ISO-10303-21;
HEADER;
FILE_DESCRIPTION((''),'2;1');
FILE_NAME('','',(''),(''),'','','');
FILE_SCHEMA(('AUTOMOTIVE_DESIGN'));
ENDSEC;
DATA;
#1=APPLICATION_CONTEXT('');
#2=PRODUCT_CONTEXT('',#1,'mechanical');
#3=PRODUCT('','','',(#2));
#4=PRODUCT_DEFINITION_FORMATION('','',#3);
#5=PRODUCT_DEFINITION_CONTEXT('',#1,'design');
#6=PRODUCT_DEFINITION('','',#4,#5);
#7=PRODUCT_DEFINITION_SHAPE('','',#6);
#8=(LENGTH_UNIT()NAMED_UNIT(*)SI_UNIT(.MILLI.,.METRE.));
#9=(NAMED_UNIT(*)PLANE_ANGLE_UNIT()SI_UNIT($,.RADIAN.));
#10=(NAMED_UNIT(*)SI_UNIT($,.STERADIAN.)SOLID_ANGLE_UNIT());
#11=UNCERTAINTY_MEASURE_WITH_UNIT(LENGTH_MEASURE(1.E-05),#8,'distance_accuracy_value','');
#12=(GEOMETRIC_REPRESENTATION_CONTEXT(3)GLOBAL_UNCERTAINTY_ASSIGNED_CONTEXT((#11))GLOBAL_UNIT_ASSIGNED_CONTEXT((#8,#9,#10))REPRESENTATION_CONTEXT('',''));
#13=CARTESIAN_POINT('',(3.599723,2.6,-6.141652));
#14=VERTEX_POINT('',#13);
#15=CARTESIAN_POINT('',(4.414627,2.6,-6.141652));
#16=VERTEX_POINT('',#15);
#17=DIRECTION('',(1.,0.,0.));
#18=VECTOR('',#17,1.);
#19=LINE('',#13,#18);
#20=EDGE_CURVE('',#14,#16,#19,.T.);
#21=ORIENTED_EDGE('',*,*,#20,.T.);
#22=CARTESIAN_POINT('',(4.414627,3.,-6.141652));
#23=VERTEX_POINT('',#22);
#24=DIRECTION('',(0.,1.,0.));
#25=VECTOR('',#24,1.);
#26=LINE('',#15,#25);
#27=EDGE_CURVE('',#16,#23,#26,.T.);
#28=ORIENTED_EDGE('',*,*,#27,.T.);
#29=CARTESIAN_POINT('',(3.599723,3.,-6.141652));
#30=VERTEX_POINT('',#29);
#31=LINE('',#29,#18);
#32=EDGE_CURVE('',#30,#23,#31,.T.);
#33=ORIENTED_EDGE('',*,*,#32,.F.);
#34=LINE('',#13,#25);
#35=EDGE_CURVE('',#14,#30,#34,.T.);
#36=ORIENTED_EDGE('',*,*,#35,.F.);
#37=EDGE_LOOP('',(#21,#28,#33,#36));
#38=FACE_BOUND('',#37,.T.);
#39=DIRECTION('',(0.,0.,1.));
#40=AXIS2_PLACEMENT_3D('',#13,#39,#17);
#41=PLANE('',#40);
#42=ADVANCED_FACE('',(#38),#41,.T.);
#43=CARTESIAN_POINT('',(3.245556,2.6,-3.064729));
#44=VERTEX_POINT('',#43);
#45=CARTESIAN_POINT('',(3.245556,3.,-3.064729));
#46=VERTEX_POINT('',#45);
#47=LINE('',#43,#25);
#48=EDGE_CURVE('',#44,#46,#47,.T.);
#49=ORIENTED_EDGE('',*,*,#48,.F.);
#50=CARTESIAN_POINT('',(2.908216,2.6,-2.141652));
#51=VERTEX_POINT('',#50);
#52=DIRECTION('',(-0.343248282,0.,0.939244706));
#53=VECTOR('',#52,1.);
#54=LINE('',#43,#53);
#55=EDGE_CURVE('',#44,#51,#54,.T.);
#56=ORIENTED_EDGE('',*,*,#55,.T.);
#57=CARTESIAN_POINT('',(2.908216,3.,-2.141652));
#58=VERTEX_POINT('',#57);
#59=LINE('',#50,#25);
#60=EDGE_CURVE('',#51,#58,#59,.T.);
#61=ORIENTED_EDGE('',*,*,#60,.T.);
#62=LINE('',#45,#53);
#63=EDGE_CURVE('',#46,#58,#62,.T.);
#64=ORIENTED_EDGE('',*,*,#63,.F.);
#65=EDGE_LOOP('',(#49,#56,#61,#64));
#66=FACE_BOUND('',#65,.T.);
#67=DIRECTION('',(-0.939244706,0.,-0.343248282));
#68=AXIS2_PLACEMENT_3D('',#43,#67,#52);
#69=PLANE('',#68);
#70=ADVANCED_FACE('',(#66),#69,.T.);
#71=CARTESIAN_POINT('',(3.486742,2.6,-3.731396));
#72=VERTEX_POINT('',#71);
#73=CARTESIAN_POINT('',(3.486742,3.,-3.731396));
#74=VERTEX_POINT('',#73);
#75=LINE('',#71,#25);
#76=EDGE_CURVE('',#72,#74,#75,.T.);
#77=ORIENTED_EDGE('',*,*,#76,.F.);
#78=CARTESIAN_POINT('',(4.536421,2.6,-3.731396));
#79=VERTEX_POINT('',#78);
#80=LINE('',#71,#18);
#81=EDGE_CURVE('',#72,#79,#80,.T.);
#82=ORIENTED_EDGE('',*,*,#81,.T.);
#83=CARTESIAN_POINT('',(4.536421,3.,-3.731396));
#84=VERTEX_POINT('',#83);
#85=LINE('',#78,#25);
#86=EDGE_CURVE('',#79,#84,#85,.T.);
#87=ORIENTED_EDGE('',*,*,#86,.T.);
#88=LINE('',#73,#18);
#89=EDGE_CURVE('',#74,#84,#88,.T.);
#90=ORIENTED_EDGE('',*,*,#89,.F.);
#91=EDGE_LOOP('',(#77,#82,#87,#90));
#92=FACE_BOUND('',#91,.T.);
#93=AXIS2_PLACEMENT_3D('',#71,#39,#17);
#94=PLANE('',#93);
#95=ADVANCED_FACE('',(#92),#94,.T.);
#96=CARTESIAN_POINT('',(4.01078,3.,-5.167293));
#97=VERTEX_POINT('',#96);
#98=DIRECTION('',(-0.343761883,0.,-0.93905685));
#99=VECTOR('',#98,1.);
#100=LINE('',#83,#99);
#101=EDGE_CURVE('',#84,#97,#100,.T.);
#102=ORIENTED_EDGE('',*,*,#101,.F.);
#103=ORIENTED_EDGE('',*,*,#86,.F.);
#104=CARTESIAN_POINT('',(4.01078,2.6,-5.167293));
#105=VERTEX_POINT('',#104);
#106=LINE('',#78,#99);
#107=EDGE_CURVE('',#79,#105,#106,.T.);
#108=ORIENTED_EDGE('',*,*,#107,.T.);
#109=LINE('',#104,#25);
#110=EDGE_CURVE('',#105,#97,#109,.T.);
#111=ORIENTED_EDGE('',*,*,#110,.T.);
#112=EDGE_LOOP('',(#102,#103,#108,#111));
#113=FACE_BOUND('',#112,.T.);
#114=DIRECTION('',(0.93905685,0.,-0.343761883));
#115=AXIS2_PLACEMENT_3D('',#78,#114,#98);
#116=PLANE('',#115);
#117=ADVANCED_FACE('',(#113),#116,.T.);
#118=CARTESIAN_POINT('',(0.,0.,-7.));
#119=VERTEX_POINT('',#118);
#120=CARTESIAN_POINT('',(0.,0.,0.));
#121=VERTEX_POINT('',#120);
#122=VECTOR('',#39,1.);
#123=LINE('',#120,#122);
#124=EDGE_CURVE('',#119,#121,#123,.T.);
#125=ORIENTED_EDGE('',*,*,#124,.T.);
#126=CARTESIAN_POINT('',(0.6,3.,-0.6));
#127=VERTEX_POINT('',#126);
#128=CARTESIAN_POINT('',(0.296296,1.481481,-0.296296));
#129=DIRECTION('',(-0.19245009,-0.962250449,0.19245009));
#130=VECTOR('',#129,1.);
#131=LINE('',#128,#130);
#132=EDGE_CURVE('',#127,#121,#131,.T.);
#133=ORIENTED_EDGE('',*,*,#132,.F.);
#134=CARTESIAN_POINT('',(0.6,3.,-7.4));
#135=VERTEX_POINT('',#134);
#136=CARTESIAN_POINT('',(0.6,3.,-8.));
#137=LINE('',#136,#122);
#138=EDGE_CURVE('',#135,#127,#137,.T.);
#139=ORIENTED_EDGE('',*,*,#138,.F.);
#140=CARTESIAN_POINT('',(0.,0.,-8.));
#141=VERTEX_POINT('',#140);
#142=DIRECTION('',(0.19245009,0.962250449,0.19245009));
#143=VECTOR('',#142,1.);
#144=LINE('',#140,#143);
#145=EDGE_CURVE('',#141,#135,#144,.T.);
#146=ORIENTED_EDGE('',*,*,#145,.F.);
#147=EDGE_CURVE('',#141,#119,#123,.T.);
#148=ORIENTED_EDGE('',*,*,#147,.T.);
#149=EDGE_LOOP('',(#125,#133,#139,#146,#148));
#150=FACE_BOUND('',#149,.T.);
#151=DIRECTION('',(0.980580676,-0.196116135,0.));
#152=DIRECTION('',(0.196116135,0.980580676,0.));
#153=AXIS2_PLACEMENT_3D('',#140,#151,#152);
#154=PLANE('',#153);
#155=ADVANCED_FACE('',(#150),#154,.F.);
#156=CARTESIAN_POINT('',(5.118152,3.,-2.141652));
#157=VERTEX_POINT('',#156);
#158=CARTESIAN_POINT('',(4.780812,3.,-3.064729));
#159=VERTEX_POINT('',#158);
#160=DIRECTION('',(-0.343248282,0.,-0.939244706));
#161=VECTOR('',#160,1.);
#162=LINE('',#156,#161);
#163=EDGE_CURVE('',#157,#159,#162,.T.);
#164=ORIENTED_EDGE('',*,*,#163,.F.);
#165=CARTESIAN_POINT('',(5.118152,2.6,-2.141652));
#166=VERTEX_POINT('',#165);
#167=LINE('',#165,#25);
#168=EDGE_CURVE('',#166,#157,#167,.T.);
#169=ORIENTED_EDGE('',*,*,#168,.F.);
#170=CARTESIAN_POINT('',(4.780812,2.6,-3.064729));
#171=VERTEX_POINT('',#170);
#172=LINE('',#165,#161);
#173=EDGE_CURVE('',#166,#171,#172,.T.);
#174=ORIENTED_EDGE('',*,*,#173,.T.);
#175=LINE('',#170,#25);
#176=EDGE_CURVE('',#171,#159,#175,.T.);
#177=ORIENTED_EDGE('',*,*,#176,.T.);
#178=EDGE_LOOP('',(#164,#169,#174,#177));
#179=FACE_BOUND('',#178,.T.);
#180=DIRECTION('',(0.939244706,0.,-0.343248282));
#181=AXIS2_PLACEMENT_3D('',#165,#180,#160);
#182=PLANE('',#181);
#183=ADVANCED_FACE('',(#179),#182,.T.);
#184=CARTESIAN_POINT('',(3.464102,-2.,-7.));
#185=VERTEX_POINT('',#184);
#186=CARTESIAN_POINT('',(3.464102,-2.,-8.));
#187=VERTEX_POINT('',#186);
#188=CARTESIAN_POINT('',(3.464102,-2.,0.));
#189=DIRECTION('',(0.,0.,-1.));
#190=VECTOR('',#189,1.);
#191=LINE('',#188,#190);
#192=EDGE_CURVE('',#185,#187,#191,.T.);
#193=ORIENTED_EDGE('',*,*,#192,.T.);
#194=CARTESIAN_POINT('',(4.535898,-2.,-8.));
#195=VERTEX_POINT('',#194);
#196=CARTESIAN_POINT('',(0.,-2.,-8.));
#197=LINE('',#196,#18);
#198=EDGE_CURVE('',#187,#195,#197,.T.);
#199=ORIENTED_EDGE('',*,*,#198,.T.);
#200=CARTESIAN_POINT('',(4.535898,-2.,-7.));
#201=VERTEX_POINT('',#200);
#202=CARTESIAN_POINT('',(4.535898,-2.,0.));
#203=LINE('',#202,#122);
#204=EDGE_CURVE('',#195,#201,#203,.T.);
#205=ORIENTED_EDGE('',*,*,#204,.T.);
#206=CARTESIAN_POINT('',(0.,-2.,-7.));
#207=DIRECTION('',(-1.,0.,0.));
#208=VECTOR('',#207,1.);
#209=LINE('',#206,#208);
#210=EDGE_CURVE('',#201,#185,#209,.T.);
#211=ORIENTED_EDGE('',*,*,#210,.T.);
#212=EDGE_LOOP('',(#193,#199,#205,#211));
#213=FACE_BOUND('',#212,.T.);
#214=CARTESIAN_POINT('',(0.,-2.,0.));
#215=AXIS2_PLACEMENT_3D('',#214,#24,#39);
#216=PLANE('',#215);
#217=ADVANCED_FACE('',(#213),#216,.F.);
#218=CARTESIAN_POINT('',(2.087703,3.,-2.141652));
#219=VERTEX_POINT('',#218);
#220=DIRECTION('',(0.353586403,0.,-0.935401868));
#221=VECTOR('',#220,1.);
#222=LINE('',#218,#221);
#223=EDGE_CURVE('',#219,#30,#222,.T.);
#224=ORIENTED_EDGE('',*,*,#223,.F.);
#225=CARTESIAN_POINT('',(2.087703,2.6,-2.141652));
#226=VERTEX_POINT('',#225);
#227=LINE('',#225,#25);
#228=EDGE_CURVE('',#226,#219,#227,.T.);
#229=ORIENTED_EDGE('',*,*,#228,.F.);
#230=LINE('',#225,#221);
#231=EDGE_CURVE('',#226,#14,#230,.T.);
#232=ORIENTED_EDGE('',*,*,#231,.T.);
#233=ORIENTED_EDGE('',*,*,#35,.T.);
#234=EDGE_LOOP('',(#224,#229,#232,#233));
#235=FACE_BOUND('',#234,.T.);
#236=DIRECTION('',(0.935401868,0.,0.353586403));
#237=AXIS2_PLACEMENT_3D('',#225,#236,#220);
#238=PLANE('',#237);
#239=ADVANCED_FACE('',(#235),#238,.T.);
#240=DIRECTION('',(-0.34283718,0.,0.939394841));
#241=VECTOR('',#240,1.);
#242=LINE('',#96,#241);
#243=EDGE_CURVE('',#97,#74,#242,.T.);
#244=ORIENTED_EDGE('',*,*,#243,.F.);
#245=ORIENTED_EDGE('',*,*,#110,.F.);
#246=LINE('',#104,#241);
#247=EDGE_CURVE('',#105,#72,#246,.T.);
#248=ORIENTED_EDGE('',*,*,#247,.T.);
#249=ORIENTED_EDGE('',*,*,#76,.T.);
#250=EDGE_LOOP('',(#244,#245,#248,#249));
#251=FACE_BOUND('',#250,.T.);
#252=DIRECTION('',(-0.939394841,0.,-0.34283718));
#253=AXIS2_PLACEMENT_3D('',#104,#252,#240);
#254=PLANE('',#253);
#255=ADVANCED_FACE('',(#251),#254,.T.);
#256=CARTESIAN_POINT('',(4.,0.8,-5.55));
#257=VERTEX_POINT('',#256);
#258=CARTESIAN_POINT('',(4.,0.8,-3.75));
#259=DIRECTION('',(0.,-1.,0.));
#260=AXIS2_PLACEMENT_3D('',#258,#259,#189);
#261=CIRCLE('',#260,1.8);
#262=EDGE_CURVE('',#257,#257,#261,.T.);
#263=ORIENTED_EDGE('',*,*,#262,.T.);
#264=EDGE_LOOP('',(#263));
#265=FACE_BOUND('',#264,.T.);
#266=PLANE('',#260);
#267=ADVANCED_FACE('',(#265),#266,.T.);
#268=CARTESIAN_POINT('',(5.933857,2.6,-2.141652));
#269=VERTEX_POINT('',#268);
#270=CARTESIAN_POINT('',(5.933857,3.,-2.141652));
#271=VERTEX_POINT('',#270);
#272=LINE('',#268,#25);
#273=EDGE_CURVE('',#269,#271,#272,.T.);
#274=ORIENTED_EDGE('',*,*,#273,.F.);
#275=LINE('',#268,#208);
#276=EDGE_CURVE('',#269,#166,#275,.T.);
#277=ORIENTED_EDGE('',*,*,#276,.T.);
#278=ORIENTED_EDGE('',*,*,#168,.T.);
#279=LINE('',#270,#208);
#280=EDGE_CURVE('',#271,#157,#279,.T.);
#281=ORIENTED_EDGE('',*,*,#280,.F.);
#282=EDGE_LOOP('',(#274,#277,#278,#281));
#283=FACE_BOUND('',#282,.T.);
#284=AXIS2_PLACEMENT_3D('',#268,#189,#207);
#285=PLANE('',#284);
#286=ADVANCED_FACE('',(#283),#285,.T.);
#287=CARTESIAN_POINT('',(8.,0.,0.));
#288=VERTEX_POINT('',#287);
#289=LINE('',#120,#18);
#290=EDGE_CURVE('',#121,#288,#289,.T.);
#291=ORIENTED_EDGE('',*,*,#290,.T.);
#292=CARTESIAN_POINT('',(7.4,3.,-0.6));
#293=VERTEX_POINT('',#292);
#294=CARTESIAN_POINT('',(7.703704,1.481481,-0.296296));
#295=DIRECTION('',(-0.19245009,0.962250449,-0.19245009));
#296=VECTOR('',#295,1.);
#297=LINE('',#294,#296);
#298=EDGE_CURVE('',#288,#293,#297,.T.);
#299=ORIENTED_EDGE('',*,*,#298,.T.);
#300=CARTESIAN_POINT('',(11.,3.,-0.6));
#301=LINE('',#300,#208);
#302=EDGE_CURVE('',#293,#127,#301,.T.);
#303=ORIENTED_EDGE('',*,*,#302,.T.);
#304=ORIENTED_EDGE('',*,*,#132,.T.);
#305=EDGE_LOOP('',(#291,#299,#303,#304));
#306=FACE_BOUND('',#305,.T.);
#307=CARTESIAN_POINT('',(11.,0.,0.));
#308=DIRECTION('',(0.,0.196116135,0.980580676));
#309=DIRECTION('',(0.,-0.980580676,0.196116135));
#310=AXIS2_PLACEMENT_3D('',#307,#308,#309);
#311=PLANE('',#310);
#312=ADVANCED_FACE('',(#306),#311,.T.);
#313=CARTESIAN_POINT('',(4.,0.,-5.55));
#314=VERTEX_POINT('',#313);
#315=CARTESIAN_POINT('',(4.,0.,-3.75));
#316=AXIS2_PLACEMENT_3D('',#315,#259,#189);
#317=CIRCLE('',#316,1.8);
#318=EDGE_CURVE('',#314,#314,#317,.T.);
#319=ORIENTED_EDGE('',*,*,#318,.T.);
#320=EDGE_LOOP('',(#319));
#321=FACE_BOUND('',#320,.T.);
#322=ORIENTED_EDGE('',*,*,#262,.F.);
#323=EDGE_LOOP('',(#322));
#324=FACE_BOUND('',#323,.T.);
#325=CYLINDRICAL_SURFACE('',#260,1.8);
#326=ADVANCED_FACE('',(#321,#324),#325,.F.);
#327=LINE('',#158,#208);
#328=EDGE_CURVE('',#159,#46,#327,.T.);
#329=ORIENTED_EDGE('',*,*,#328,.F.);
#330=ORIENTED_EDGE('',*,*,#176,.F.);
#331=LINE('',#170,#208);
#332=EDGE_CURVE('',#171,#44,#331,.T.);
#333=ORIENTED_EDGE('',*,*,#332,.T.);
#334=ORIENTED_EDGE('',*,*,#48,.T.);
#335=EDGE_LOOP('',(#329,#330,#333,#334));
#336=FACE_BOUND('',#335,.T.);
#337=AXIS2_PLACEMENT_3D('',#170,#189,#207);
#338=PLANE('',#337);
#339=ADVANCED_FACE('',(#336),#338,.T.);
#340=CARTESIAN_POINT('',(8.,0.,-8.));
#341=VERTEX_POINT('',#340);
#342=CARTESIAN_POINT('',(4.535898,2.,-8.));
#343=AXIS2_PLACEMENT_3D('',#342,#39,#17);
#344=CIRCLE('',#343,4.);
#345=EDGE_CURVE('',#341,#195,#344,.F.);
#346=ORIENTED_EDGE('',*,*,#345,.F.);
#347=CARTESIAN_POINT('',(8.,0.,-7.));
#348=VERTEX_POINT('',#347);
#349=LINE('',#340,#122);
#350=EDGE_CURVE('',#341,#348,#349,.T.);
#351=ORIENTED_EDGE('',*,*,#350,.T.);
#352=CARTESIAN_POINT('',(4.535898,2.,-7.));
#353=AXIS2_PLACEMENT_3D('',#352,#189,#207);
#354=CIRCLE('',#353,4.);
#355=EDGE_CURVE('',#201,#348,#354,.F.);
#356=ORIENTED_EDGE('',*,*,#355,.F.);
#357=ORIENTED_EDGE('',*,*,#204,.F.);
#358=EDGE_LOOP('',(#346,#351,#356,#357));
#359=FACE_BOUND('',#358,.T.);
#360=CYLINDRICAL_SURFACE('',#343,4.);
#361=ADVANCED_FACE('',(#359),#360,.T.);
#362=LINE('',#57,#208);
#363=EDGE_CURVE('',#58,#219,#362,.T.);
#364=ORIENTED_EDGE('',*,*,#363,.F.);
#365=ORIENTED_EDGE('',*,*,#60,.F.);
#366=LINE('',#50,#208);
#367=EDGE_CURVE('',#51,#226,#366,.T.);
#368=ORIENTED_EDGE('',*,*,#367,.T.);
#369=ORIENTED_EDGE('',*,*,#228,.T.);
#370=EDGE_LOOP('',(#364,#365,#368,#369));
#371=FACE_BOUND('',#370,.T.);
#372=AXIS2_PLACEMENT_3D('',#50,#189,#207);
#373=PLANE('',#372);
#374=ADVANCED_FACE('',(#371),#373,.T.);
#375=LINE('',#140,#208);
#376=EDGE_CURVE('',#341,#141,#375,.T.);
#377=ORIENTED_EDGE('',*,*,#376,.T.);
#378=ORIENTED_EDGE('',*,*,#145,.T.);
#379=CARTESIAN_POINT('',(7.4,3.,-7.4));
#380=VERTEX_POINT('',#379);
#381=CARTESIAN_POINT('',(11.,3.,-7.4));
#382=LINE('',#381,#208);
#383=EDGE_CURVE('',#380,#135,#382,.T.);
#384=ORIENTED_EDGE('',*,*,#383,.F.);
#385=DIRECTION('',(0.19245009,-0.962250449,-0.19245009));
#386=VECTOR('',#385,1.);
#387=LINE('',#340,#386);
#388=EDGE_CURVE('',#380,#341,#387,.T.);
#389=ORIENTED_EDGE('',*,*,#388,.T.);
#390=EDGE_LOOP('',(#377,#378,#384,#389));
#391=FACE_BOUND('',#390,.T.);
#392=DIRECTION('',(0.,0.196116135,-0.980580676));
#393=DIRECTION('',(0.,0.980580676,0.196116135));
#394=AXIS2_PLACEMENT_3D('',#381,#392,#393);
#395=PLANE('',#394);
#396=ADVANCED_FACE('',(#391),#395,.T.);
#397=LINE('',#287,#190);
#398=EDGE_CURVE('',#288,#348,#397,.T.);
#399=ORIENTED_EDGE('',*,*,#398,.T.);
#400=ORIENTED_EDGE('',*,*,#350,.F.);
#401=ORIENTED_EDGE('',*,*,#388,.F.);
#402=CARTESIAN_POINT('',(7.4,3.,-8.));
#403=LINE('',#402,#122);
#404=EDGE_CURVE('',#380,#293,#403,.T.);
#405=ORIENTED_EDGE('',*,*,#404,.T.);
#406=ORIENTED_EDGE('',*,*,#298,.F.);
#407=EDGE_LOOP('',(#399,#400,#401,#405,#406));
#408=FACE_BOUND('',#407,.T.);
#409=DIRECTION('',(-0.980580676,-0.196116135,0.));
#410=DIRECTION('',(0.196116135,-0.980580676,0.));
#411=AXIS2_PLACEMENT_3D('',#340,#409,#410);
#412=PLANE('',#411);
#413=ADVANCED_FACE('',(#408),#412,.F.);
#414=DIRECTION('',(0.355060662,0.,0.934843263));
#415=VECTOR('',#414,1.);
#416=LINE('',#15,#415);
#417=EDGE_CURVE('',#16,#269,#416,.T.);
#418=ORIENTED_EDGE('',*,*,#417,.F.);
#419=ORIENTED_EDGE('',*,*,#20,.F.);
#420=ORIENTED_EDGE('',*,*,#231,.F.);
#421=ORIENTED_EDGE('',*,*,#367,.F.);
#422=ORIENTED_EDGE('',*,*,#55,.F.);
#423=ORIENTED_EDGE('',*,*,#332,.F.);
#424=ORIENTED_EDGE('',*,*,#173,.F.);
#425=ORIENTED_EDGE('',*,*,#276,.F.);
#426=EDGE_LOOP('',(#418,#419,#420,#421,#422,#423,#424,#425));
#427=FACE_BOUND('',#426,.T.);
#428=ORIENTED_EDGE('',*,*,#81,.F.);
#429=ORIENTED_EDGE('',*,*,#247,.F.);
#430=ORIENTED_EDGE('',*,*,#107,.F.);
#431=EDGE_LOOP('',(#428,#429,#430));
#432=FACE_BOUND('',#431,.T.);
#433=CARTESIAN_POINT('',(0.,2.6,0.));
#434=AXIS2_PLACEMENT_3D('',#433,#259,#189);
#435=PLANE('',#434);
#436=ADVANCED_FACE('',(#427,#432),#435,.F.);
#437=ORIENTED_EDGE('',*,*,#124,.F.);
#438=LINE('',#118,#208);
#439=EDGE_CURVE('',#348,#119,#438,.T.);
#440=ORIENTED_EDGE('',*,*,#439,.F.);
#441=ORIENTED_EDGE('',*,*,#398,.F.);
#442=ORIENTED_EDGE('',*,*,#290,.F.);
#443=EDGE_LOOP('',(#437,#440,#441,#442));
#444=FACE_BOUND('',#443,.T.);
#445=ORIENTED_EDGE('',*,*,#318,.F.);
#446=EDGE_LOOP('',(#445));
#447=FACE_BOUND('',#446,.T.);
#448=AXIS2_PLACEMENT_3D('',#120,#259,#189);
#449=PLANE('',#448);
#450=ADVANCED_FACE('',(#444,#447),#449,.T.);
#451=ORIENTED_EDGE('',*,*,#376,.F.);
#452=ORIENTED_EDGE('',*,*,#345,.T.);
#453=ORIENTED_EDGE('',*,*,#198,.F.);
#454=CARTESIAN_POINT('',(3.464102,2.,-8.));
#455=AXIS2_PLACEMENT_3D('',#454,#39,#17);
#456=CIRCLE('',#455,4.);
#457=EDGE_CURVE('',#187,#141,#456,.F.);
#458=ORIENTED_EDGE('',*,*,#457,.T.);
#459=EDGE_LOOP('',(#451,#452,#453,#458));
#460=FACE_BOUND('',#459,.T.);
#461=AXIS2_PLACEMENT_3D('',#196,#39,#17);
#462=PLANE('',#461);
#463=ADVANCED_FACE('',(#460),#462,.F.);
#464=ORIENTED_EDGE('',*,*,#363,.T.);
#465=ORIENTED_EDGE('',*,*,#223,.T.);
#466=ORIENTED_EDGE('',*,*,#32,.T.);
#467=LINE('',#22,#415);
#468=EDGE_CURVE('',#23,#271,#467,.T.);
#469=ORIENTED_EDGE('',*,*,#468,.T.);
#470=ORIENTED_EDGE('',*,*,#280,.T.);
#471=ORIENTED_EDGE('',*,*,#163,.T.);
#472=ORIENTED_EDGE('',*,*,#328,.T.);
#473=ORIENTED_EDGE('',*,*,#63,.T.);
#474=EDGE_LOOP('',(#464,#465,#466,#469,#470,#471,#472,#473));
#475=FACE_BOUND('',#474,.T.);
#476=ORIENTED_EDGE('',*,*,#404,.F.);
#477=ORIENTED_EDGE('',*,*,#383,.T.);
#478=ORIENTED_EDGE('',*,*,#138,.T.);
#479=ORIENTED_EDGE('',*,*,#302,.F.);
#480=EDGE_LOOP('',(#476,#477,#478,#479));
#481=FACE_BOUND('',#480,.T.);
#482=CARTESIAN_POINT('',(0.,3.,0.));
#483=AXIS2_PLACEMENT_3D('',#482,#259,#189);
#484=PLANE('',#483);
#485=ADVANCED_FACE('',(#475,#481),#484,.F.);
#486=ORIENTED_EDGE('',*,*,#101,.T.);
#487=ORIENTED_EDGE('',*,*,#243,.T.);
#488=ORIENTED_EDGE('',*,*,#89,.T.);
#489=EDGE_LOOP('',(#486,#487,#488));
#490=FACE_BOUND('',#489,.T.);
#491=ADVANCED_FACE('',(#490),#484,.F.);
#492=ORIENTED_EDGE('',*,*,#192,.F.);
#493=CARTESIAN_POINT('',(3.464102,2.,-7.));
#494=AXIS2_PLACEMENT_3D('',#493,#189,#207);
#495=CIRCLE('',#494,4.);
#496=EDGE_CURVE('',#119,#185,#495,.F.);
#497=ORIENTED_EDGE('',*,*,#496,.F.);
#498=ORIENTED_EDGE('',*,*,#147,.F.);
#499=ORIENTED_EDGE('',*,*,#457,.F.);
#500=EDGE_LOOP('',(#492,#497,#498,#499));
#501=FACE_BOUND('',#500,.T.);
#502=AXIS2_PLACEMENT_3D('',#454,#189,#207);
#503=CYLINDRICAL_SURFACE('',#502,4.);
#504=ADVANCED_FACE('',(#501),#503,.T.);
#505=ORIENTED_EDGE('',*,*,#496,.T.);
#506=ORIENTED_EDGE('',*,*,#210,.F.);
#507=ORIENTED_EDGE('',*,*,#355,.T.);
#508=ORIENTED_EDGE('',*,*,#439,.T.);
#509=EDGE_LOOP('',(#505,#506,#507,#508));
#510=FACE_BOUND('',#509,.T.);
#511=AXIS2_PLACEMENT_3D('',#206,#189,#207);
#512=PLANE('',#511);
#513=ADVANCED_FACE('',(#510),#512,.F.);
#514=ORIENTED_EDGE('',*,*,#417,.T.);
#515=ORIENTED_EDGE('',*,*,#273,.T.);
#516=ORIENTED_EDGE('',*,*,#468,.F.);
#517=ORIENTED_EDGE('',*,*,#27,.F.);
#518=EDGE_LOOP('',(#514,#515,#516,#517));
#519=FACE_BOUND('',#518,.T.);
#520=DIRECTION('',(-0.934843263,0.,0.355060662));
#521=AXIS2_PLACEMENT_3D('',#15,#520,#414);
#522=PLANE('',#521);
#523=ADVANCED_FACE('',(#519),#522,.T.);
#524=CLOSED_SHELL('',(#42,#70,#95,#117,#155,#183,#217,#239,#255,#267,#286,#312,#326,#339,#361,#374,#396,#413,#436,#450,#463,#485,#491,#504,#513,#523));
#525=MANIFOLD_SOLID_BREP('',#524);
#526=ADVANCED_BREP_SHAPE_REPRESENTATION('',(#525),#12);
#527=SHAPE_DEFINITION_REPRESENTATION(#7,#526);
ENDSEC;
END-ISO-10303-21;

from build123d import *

# Parameters (mm, degrees)
SKETCH1_W               = 8
SKETCH1_H               = 8
BOSS_EXTRUDE1_DEPTH     = 3
CUT_EXTRUDE1_DEPTH      = 12.704699911
CUT_EXTRUDE1_DEPTH_BACK = 12.704699911
CUT_EXTRUDE2_DEPTH      = 11
SKETCH4_R               = 1.8
CUT_EXTRUDE3_DEPTH      = 0.8
SKETCH5_W               = 8
SKETCH5_H               = 1
BOSS_EXTRUDE2_DEPTH     = 2
FILLET1_R               = 4
CUT_EXTRUDE4_DEPTH      = 0.4


with BuildPart() as part:
    # Sketch1 → Boss-Extrude1 (new body)
    with BuildSketch(Plane(origin=(0, 0, 0), x_dir=(1, 0, 0), z_dir=(0, 1, 0))):
        with Locations((4, 4)):
            Rectangle(SKETCH1_W, SKETCH1_H)
    extrude(amount=BOSS_EXTRUDE1_DEPTH)

    # Sketch2 → Cut-Extrude1 (cut, two sides: drawn at the far end of the back side and taken through both)
    with BuildSketch(Plane.XY.offset(-CUT_EXTRUDE1_DEPTH_BACK)):
        Polygon((0, 0), (0.6, 3), (0, 3), align=None)
        Polygon((8, 0), (7.4, 3), (8, 3), align=None)
    extrude(amount=CUT_EXTRUDE1_DEPTH + CUT_EXTRUDE1_DEPTH_BACK, mode=Mode.SUBTRACT)

    # Sketch3 → Cut-Extrude2 (cut)
    with BuildSketch(Plane(origin=(0, 0, 0), x_dir=(0, 0, -1), z_dir=(1, 0, 0))):
        Polygon((0, 0), (0.6, 3), (0, 3), align=None)
        Polygon((8, 3), (7.4, 3), (8, 0), align=None)
    extrude(amount=CUT_EXTRUDE2_DEPTH, mode=Mode.SUBTRACT)

    # Sketch4 → Cut-Extrude3 (cut)
    with BuildSketch(Plane.XZ):
        with Locations(Location((4, -3.75, 0), (0, 0, 270))):
            Circle(SKETCH4_R)
    extrude(amount=-CUT_EXTRUDE3_DEPTH, mode=Mode.SUBTRACT)

    # Sketch5 → Boss-Extrude2 (add)
    with BuildSketch(Plane.XZ):
        with Locations((4, -7.5)):
            Rectangle(SKETCH5_W, SKETCH5_H)
    extrude(amount=BOSS_EXTRUDE2_DEPTH)

    # Fillet1
    # the kernel refuses this fillet: 4 mm, written as the material it takes off along each edge
    with BuildSketch(Plane(origin=(8, -2, -16.660254038), x_dir=(0, 1, 0), z_dir=(0, 0, 1)), Plane(origin=(0, -2, 1.660254038), x_dir=(0, 1, 0), z_dir=(0, 0, -1))) as fillet1_piece_1:
        with BuildLine():
            CenterArc((4, 3.464101615), FILLET1_R, 180, 60)
            Line((0, 3.464101615), (-0.08, 3.464101615))
            Line((-0.08, 3.464101615), (-0.08, 0))
            Line((-0.08, 0), (0, -0.08))
            ThreePointArc((0, -0.08), (1, -0.08), (1.96, -0.069282032))
            Line((1.96, -0.069282032), (2, 0))
        make_face()
    extrude(amount=18.320508076, mode=Mode.SUBTRACT)

    # Sketch6 → Cut-Extrude4 (cut)
    with BuildSketch(Plane(origin=(0, 3, 0), x_dir=(1, 0, 0), z_dir=(0, 1, 0))):
        Polygon((5.933857302, 2.141652068), (5.118152174, 2.141652068), (4.780812431, 3.064728992), (3.24555602, 3.064728992), (2.908216277, 2.141652068), (2.087703456, 2.141652068), (3.599722687, 6.141652068), (4.414626533, 6.141652068), align=None)
        Polygon((4.536421405, 3.731395658), (4.010780379, 5.167293094), (3.486741918, 3.731395658), align=None, mode=Mode.SUBTRACT)
    extrude(amount=-CUT_EXTRUDE4_DEPTH, mode=Mode.SUBTRACT)


solid = part.part
